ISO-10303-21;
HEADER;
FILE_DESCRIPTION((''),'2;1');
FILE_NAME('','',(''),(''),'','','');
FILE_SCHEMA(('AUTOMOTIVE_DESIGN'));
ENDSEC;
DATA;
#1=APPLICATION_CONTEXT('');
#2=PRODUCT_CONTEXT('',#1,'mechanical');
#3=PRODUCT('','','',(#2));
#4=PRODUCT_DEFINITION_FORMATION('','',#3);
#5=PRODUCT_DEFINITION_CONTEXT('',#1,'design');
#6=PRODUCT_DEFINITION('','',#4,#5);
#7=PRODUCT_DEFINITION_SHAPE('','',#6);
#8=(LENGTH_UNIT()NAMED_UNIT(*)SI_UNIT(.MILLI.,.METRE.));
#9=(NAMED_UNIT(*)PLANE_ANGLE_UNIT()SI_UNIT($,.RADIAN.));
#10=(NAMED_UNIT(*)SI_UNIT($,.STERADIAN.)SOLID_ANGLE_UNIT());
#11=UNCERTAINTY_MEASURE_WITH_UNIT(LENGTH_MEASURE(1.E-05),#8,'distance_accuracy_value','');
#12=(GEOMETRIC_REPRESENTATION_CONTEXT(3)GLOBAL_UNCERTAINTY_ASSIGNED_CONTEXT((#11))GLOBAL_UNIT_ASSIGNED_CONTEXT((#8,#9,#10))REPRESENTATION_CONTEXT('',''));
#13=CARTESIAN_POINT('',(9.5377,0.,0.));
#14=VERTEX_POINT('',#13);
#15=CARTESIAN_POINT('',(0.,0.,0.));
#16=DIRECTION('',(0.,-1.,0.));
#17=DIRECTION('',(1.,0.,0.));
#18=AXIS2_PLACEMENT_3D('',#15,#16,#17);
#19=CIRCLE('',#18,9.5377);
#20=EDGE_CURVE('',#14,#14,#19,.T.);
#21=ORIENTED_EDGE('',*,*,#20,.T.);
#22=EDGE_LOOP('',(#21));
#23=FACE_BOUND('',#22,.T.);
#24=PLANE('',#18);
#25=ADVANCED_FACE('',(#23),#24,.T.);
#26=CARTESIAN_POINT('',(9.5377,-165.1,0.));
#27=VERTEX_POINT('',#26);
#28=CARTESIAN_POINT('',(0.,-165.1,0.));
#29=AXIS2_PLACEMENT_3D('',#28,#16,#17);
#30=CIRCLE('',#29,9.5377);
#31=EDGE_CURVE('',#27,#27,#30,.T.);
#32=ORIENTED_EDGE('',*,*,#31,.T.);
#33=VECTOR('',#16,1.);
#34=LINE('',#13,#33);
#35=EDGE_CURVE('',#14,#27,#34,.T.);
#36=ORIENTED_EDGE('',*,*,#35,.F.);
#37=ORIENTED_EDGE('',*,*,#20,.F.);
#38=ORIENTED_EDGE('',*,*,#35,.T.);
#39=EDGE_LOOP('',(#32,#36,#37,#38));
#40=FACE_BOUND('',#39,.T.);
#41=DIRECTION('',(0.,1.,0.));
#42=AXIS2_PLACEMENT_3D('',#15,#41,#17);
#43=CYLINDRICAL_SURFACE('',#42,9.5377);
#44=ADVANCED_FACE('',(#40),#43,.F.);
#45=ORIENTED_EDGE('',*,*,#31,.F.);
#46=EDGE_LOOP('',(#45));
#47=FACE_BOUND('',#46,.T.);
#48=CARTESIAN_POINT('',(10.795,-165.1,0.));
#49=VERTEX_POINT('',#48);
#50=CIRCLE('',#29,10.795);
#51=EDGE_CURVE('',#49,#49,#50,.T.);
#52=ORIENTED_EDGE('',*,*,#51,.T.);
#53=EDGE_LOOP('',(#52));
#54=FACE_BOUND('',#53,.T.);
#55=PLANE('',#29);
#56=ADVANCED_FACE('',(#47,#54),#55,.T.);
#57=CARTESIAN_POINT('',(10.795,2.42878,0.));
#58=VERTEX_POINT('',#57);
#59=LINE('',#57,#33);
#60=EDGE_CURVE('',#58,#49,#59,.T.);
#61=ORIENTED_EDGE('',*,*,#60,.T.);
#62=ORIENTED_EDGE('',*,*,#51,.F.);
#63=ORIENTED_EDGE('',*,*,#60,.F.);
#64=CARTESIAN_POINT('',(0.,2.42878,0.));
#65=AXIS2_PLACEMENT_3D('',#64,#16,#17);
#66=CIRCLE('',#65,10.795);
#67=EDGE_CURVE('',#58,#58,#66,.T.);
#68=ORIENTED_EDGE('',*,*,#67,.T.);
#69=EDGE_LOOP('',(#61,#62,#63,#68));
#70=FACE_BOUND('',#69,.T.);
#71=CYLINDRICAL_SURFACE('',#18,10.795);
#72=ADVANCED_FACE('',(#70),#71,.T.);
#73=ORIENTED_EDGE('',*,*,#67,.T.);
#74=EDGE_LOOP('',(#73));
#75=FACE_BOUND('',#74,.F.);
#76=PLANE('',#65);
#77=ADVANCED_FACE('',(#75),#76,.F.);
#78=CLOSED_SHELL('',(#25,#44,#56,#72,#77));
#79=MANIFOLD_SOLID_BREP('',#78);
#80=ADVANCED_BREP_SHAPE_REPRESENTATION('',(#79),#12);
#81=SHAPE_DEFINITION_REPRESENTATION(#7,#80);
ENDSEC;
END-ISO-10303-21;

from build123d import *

# Parameters (mm, degrees)
F0_R     = 10.795
F0_R_2   = 9.5377
F1_DEPTH = 165.1
F2_R     = 10.795
F3_DEPTH = 2.42878


# Not quite as in the source:
# - a feature names something its author has since deleted; it is built from what else it names


with BuildPart() as f1:
    # F0 (on Front) → F1 (new body)
    with BuildSketch(Plane.XZ):
        Circle(F0_R)
        Circle(F0_R_2, mode=Mode.SUBTRACT)
    extrude(amount=F1_DEPTH)

    # F2 (on Front) → F3 (join)
    with BuildSketch(Plane.XZ):
        Circle(F2_R)
    extrude(amount=-F3_DEPTH)


solid = f1.part
